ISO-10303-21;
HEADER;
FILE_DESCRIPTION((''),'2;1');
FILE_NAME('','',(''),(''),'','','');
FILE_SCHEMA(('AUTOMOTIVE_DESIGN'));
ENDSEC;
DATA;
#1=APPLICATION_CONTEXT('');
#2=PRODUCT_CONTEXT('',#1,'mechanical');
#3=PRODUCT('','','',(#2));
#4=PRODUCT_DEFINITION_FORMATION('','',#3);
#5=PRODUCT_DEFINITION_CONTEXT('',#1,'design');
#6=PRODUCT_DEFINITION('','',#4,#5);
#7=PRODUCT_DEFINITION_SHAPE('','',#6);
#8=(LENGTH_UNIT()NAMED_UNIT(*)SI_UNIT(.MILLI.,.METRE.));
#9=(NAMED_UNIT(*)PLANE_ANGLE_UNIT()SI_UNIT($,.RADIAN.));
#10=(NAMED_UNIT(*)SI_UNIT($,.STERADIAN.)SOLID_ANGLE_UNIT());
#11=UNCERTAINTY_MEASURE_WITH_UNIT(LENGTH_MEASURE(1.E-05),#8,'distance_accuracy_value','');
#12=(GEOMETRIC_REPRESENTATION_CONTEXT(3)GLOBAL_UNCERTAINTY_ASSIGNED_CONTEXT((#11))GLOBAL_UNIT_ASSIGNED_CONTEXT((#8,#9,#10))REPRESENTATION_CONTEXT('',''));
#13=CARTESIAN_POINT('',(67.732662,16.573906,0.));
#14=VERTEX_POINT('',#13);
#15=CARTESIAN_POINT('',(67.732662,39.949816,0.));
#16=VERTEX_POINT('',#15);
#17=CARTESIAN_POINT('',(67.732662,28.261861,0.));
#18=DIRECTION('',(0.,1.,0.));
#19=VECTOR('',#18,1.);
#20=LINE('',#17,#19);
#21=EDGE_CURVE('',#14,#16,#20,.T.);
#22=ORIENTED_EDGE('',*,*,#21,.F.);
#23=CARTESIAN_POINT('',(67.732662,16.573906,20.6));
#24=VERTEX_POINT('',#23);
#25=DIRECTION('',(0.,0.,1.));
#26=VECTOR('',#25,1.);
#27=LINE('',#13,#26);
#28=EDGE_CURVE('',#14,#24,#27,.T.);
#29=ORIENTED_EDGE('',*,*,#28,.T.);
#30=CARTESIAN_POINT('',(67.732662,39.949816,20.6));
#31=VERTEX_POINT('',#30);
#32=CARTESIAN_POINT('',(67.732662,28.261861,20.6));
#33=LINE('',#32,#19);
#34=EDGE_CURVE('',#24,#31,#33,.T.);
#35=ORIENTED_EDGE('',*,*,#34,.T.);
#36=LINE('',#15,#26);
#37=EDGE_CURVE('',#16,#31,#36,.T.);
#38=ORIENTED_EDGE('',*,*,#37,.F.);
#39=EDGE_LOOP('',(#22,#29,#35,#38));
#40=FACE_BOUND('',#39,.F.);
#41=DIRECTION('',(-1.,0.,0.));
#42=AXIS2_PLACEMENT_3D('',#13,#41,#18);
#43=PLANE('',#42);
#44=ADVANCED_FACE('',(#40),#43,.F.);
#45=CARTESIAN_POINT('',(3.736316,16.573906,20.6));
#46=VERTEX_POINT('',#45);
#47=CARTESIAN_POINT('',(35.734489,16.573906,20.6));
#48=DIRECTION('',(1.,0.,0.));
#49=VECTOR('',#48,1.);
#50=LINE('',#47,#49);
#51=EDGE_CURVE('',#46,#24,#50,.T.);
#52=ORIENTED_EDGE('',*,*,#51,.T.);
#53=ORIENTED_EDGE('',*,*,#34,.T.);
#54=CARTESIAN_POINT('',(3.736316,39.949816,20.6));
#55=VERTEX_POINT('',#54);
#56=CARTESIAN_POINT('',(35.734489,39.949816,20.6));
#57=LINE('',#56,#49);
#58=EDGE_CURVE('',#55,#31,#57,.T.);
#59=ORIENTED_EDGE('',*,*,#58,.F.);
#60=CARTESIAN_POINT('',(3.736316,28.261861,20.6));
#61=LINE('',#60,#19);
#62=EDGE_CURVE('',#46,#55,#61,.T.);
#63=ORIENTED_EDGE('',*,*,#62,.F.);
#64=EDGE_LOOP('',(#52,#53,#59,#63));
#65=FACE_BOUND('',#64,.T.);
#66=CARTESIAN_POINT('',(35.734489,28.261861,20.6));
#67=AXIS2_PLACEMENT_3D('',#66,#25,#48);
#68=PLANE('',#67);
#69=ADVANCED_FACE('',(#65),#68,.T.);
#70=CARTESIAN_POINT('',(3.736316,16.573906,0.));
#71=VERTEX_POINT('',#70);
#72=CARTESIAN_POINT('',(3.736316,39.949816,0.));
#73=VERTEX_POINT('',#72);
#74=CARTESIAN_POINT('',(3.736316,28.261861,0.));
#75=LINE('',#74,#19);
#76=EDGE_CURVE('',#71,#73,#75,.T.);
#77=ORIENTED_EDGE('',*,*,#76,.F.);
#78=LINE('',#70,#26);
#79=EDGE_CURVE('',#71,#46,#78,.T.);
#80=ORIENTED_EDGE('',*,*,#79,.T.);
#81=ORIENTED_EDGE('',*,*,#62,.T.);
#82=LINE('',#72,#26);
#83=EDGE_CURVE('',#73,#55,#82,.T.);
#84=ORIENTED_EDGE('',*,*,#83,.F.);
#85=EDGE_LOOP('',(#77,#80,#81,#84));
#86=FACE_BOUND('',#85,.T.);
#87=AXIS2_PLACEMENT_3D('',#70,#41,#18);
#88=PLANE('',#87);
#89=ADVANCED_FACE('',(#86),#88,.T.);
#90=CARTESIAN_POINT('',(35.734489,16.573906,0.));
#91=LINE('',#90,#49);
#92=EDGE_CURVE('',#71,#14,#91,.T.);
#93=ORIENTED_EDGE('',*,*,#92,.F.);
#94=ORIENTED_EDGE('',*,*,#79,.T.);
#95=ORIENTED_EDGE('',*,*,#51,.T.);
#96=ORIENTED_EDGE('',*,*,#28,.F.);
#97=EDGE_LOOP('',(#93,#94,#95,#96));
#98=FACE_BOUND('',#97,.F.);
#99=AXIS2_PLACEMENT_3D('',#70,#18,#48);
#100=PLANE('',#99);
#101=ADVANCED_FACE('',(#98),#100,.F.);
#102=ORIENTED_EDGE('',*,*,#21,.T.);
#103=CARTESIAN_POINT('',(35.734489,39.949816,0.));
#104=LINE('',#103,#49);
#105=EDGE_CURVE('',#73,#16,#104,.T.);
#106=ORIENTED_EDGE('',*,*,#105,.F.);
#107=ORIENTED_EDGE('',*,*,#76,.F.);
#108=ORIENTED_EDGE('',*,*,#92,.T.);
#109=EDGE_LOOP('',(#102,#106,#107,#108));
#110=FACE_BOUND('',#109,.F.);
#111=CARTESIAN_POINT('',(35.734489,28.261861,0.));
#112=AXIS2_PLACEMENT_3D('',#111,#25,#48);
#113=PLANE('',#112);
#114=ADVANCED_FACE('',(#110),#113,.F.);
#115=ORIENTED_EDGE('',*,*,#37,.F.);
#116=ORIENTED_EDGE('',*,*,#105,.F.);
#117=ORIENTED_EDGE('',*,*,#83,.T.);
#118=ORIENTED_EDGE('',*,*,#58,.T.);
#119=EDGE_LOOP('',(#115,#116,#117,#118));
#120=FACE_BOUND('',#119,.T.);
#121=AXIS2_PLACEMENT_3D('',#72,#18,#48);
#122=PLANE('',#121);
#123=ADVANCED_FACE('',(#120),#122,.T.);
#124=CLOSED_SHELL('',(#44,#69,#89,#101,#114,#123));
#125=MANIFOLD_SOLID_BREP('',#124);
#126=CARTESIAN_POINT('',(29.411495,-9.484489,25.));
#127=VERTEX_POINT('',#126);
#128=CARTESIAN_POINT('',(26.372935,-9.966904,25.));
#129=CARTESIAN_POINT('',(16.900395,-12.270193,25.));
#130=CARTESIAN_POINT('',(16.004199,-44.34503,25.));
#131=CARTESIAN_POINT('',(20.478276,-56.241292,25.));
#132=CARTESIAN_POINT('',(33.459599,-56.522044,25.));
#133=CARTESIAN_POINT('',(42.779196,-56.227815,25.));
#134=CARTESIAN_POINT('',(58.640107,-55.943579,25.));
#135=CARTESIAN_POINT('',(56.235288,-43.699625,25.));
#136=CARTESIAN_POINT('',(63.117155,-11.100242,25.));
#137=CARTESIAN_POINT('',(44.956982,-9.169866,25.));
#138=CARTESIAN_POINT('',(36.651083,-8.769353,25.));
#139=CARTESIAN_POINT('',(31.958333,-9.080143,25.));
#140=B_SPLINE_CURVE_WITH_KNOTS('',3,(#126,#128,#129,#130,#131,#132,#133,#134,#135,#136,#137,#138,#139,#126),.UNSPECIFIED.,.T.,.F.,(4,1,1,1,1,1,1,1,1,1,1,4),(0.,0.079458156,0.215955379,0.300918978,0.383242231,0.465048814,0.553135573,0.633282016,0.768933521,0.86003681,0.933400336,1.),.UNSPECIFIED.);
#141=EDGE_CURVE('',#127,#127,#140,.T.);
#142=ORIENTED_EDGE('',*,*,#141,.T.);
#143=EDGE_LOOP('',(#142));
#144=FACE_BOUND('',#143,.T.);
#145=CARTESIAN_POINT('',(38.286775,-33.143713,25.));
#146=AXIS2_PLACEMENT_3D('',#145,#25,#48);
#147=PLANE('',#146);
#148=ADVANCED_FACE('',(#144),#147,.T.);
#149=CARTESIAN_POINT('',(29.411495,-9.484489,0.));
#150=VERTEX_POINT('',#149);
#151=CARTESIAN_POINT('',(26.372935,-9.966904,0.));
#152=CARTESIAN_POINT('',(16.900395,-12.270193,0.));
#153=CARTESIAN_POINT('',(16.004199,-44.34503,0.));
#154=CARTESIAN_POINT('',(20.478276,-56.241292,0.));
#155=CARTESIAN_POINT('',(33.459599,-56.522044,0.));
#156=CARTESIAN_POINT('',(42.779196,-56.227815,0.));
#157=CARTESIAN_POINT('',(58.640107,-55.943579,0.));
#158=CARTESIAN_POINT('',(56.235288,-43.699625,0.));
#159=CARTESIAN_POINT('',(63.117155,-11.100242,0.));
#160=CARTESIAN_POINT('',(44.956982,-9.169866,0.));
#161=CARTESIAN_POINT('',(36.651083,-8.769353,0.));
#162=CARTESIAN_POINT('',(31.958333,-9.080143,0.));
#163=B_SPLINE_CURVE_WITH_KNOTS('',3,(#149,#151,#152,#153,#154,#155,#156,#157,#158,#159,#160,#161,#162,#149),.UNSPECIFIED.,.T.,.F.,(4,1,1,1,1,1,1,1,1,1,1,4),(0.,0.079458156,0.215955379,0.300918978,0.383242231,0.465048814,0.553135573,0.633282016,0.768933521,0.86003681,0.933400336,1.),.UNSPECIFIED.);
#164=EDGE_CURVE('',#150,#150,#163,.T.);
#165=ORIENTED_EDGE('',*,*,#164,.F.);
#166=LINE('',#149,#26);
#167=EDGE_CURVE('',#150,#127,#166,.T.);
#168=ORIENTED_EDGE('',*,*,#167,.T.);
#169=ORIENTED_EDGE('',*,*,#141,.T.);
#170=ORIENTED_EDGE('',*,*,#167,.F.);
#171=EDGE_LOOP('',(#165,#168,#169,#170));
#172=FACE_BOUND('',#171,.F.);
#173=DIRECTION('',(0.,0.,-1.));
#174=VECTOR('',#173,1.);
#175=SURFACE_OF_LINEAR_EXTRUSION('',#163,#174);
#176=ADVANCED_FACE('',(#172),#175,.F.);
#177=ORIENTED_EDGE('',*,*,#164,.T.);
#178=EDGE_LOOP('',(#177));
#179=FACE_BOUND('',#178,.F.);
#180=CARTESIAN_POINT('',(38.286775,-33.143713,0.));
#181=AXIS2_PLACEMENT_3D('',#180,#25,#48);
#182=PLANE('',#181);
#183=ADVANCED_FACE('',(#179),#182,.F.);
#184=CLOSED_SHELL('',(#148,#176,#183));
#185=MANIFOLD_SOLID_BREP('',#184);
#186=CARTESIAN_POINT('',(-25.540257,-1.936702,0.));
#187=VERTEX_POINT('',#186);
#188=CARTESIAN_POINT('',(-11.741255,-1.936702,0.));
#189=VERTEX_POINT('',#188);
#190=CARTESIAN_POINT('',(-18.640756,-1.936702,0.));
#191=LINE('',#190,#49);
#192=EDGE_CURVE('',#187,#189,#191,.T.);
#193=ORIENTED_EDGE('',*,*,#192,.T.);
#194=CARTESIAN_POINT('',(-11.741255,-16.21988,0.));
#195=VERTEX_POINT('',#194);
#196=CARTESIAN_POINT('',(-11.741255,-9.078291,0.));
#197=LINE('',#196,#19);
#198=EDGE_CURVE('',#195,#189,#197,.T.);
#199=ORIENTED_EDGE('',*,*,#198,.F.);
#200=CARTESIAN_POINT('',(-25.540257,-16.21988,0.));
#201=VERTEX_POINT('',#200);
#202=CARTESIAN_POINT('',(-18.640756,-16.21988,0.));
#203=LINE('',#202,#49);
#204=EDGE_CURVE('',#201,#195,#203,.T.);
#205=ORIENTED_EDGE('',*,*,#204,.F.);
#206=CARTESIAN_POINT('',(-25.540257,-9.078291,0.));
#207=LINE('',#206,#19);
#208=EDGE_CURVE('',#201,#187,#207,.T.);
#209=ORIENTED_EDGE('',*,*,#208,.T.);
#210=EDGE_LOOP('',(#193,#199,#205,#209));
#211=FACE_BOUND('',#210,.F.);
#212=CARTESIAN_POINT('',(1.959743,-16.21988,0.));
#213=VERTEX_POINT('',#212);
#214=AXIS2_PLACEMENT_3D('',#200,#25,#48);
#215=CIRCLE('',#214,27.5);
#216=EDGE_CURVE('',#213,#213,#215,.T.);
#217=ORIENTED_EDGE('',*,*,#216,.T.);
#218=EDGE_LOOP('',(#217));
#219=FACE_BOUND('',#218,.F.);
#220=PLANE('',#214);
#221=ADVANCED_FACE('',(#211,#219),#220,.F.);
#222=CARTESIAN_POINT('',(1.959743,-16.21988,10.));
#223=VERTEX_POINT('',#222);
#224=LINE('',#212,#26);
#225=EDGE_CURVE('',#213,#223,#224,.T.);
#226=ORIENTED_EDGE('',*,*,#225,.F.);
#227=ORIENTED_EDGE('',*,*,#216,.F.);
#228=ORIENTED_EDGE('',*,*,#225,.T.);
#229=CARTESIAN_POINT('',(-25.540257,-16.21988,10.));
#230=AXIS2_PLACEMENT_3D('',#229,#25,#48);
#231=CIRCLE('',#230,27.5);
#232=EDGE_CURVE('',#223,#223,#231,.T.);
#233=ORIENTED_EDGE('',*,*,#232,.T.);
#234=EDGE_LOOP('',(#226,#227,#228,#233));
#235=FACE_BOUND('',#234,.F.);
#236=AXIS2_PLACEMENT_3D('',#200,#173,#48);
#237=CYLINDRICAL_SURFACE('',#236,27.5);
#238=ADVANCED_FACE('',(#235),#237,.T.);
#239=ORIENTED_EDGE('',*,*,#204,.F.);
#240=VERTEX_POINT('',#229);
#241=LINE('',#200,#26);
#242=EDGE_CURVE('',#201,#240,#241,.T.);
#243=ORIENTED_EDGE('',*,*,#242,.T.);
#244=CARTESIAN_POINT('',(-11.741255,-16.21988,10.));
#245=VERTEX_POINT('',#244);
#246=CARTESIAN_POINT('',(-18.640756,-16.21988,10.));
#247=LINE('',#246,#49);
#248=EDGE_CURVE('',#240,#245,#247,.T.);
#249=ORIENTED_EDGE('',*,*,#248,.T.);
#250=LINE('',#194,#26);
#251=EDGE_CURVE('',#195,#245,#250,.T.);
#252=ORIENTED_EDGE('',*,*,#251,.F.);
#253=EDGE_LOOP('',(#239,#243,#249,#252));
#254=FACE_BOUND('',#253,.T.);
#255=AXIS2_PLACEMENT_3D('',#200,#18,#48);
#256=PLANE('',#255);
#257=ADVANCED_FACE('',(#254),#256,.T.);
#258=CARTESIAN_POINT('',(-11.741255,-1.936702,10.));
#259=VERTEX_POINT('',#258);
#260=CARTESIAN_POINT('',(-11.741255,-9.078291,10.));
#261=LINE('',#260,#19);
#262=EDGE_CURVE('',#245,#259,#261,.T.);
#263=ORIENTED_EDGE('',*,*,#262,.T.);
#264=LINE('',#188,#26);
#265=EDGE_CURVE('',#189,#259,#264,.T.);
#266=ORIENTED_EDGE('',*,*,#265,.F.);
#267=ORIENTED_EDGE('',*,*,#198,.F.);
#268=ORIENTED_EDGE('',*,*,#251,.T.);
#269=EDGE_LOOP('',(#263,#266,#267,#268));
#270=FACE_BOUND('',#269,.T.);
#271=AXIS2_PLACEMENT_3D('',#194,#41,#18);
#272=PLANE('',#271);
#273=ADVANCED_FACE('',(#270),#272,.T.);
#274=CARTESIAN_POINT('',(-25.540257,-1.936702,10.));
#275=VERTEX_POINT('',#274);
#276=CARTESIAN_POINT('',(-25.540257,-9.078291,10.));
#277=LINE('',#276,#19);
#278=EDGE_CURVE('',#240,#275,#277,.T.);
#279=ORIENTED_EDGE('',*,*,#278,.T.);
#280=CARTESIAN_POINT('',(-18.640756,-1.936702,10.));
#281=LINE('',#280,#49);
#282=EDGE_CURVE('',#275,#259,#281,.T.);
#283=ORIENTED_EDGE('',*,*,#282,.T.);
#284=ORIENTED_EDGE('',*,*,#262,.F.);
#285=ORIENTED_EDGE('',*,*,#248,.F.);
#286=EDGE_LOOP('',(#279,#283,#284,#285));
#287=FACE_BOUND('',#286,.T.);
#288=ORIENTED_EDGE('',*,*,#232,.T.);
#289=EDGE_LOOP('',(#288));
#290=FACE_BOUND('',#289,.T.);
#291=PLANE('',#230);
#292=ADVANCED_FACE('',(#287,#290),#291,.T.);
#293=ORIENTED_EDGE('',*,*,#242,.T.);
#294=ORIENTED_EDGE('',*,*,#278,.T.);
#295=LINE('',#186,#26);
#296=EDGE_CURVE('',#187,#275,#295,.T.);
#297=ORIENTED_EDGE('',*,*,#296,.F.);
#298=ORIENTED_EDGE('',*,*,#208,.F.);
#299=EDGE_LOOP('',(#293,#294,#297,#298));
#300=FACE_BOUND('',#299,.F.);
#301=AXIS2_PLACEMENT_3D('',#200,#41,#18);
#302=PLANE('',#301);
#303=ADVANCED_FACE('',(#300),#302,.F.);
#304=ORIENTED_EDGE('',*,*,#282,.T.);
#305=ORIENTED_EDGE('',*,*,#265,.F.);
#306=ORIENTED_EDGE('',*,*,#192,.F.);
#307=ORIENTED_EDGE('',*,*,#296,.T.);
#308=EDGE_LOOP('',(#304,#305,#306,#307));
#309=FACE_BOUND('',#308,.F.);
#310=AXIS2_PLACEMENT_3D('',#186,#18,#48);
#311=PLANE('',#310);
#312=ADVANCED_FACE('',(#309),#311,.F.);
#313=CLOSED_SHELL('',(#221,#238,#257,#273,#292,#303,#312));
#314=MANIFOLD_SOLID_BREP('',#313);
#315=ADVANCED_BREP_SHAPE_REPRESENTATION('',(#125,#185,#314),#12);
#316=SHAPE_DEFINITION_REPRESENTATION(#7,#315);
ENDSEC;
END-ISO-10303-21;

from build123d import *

# Parameters (mm, degrees)
F0_R     = 27.5
F0_W     = 13.7990014628
F0_H     = 14.2831781413
F1_DEPTH = 10
F2_W     = 63.9963464346
F2_H     = 23.3759097755
F3_DEPTH = 20.6
F9_DEPTH = 25


# Not quite as in the source:
# - the program builds the solid bodies; features that only make, move or delete a surface that nothing else refers to are left out


with BuildPart() as f1:
    # F0 (on Top) → F1 (new body)
    with BuildSketch(Plane.XY):
        with Locations((-25.5402568728, -16.2198804319)):
            Circle(F0_R)
        with Locations((-18.6407561414, -9.0782913612)):
            Rectangle(F0_W, F0_H, mode=Mode.SUBTRACT)
    extrude(amount=F1_DEPTH)


with BuildPart() as f3:
    # F2 (on Top) → F3 (new body)
    with BuildSketch(Plane.XY):
        with Locations((35.7344887452, 28.2618608326)):
            Rectangle(F2_W, F2_H)
    extrude(amount=F3_DEPTH)


with BuildPart() as f9:
    # F8 (on Top) → F9 (new body)
    with BuildSketch(Plane.XY):
        with BuildLine():
            add(Edge.make_bspline(
                [(29.4114947319, -9.4844894484), (26.3729347773, -9.9669040751), (16.9003945389, -12.2701929719), (16.0041992708, -44.345029821), (20.4782764199, -56.2412922253), (33.4595990445, -56.5220444535), (42.7791961025, -56.2278149781), (58.6401072937, -55.9435785579), (56.2352878094, -43.6996249686), (63.1171554107, -11.1002415527), (44.9569815233, -9.169865832), (36.6510831635, -8.7693531278), (31.9583329877, -9.0801426378), (29.4114947319, -9.4844894484)],
                knots=[0, 0, 0, 0, 0.0794581558, 0.2159553788, 0.3009189779, 0.3832422311, 0.4650488142, 0.5531355725, 0.6332820157, 0.7689335211, 0.8600368102, 0.9334003364, 1, 1, 1, 1], degree=3))
        make_face()
    extrude(amount=F9_DEPTH)


solid = Compound([f1.part, f3.part, f9.part])
